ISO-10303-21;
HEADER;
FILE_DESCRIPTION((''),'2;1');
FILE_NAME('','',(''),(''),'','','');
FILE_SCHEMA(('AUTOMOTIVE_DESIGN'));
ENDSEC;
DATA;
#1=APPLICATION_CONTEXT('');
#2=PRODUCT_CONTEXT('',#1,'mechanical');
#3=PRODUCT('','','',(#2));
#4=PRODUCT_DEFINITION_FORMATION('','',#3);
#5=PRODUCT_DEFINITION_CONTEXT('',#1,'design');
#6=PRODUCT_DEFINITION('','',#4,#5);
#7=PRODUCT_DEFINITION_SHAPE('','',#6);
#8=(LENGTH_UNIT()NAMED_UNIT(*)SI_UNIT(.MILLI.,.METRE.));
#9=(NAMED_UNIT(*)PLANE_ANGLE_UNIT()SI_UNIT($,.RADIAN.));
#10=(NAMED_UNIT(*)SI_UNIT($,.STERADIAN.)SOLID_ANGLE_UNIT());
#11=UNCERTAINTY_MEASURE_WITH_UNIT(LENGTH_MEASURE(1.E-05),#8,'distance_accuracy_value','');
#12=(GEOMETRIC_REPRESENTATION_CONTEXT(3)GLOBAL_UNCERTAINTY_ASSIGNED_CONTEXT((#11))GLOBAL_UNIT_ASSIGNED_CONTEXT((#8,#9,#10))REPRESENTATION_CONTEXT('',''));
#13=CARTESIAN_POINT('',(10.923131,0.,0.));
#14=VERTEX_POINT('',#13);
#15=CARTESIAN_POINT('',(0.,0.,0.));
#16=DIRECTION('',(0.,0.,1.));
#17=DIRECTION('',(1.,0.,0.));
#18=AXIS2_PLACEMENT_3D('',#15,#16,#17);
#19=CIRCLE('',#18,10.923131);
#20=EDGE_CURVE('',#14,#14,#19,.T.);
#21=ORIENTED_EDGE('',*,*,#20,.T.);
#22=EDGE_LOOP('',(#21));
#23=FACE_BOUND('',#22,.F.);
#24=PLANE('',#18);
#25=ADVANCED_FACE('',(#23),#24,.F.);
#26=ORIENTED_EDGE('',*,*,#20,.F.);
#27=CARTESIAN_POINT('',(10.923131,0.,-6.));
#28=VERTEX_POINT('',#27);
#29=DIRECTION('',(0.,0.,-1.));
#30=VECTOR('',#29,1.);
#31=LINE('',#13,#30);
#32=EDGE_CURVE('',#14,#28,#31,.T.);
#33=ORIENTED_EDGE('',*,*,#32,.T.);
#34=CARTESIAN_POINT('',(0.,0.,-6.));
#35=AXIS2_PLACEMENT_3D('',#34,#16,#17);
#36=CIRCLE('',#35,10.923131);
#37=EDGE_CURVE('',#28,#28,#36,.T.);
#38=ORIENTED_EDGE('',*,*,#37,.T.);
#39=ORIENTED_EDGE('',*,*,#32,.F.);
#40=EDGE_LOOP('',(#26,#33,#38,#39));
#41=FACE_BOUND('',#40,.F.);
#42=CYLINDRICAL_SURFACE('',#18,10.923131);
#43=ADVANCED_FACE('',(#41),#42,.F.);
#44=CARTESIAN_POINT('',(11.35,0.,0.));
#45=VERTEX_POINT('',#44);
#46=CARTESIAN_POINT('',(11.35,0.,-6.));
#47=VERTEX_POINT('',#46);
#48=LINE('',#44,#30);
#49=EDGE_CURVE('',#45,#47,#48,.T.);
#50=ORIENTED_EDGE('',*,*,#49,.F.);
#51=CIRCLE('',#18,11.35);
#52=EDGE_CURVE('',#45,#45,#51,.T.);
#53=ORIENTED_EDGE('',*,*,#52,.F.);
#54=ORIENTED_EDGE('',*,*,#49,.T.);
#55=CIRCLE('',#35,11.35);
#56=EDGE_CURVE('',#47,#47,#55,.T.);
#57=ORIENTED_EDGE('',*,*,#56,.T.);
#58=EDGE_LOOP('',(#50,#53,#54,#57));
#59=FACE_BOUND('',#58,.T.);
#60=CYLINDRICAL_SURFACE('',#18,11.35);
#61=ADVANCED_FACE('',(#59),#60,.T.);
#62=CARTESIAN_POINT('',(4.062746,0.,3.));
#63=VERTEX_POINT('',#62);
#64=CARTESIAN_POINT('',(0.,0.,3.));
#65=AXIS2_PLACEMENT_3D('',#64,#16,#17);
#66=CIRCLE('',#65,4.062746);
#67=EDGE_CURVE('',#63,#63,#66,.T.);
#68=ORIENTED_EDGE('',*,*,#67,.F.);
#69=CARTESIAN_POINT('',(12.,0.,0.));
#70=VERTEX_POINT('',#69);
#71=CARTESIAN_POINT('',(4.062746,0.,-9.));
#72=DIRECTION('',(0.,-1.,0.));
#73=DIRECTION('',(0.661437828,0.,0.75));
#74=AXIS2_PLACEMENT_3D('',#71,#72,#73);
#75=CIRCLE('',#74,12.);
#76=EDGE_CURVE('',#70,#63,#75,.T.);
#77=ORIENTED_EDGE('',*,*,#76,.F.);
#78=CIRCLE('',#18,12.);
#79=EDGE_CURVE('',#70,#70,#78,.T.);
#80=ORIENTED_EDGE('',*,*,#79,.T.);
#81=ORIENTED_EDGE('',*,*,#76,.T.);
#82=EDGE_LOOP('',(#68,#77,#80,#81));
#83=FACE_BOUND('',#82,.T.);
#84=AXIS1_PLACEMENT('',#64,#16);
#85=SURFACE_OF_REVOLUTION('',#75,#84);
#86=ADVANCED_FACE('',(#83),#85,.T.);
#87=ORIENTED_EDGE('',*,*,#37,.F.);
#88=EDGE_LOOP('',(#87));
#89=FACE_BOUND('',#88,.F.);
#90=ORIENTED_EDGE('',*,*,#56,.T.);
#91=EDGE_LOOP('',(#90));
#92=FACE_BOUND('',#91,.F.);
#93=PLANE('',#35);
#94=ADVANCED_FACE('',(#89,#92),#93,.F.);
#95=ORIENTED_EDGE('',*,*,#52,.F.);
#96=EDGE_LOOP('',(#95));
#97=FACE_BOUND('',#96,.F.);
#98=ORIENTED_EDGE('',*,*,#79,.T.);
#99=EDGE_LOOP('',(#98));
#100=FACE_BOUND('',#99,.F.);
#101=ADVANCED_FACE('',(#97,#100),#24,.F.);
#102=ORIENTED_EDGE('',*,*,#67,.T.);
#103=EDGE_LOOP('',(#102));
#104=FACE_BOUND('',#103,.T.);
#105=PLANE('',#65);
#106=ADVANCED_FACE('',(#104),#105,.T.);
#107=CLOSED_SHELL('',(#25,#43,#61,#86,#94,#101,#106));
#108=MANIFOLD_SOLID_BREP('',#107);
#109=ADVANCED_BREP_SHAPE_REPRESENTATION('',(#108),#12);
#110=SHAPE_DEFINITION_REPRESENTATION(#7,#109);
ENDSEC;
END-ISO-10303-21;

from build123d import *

# Parameters (mm, degrees)
F0_R     = 11.35
F0_R_2   = 10.9231311618
F1_DEPTH = 6
F0_R_3   = 12
F2_DEPTH = 3


# Not quite as in the source:
# - a fillet or chamfer that OpenCascade refuses, or shapes differently, is made with other operations: its cross-section is extruded or revolved along the edge and cut away or added


with BuildPart() as f1:
    # F0 (on Top) → F1 (new body)
    with BuildSketch(Plane.XY):
        Circle(F0_R)
        Circle(F0_R_2, mode=Mode.SUBTRACT)
    extrude(amount=-F1_DEPTH)

    # F0 (on Top) → F2 (join)
    with BuildSketch(Plane.XY):
        Circle(F0_R_3)
        Circle(F0_R, mode=Mode.SUBTRACT)
        Circle(F0_R)
        Circle(F0_R_2, mode=Mode.SUBTRACT)
        Circle(F0_R_2)
    extrude(amount=F2_DEPTH)

    # F3: fillet of radius 12 on 1 edges, made by hand

    # F3_s1 → F3_t2 (revolve, cut)
    with BuildSketch(Plane.XZ):
        with BuildLine():
            ThreePointArc((12, 0), (8.3053867539, 2.2249721603), (4.0627460668, 3))
            Line((4.0627460668, 3), (4.0627460668, 3.24))
            Line((4.0627460668, 3.24), (12, 3.24))
            Line((12, 3.24), (12.24, 3))
            ThreePointArc((12.24, 3), (12.24, 1.5), (12.1587450787, 0.18))
            Line((12.1587450787, 0.18), (12, 0))
        make_face()
    revolve(axis=Axis((0, 0, 3), (0, 0, 1)), mode=Mode.SUBTRACT)


solid = f1.part
